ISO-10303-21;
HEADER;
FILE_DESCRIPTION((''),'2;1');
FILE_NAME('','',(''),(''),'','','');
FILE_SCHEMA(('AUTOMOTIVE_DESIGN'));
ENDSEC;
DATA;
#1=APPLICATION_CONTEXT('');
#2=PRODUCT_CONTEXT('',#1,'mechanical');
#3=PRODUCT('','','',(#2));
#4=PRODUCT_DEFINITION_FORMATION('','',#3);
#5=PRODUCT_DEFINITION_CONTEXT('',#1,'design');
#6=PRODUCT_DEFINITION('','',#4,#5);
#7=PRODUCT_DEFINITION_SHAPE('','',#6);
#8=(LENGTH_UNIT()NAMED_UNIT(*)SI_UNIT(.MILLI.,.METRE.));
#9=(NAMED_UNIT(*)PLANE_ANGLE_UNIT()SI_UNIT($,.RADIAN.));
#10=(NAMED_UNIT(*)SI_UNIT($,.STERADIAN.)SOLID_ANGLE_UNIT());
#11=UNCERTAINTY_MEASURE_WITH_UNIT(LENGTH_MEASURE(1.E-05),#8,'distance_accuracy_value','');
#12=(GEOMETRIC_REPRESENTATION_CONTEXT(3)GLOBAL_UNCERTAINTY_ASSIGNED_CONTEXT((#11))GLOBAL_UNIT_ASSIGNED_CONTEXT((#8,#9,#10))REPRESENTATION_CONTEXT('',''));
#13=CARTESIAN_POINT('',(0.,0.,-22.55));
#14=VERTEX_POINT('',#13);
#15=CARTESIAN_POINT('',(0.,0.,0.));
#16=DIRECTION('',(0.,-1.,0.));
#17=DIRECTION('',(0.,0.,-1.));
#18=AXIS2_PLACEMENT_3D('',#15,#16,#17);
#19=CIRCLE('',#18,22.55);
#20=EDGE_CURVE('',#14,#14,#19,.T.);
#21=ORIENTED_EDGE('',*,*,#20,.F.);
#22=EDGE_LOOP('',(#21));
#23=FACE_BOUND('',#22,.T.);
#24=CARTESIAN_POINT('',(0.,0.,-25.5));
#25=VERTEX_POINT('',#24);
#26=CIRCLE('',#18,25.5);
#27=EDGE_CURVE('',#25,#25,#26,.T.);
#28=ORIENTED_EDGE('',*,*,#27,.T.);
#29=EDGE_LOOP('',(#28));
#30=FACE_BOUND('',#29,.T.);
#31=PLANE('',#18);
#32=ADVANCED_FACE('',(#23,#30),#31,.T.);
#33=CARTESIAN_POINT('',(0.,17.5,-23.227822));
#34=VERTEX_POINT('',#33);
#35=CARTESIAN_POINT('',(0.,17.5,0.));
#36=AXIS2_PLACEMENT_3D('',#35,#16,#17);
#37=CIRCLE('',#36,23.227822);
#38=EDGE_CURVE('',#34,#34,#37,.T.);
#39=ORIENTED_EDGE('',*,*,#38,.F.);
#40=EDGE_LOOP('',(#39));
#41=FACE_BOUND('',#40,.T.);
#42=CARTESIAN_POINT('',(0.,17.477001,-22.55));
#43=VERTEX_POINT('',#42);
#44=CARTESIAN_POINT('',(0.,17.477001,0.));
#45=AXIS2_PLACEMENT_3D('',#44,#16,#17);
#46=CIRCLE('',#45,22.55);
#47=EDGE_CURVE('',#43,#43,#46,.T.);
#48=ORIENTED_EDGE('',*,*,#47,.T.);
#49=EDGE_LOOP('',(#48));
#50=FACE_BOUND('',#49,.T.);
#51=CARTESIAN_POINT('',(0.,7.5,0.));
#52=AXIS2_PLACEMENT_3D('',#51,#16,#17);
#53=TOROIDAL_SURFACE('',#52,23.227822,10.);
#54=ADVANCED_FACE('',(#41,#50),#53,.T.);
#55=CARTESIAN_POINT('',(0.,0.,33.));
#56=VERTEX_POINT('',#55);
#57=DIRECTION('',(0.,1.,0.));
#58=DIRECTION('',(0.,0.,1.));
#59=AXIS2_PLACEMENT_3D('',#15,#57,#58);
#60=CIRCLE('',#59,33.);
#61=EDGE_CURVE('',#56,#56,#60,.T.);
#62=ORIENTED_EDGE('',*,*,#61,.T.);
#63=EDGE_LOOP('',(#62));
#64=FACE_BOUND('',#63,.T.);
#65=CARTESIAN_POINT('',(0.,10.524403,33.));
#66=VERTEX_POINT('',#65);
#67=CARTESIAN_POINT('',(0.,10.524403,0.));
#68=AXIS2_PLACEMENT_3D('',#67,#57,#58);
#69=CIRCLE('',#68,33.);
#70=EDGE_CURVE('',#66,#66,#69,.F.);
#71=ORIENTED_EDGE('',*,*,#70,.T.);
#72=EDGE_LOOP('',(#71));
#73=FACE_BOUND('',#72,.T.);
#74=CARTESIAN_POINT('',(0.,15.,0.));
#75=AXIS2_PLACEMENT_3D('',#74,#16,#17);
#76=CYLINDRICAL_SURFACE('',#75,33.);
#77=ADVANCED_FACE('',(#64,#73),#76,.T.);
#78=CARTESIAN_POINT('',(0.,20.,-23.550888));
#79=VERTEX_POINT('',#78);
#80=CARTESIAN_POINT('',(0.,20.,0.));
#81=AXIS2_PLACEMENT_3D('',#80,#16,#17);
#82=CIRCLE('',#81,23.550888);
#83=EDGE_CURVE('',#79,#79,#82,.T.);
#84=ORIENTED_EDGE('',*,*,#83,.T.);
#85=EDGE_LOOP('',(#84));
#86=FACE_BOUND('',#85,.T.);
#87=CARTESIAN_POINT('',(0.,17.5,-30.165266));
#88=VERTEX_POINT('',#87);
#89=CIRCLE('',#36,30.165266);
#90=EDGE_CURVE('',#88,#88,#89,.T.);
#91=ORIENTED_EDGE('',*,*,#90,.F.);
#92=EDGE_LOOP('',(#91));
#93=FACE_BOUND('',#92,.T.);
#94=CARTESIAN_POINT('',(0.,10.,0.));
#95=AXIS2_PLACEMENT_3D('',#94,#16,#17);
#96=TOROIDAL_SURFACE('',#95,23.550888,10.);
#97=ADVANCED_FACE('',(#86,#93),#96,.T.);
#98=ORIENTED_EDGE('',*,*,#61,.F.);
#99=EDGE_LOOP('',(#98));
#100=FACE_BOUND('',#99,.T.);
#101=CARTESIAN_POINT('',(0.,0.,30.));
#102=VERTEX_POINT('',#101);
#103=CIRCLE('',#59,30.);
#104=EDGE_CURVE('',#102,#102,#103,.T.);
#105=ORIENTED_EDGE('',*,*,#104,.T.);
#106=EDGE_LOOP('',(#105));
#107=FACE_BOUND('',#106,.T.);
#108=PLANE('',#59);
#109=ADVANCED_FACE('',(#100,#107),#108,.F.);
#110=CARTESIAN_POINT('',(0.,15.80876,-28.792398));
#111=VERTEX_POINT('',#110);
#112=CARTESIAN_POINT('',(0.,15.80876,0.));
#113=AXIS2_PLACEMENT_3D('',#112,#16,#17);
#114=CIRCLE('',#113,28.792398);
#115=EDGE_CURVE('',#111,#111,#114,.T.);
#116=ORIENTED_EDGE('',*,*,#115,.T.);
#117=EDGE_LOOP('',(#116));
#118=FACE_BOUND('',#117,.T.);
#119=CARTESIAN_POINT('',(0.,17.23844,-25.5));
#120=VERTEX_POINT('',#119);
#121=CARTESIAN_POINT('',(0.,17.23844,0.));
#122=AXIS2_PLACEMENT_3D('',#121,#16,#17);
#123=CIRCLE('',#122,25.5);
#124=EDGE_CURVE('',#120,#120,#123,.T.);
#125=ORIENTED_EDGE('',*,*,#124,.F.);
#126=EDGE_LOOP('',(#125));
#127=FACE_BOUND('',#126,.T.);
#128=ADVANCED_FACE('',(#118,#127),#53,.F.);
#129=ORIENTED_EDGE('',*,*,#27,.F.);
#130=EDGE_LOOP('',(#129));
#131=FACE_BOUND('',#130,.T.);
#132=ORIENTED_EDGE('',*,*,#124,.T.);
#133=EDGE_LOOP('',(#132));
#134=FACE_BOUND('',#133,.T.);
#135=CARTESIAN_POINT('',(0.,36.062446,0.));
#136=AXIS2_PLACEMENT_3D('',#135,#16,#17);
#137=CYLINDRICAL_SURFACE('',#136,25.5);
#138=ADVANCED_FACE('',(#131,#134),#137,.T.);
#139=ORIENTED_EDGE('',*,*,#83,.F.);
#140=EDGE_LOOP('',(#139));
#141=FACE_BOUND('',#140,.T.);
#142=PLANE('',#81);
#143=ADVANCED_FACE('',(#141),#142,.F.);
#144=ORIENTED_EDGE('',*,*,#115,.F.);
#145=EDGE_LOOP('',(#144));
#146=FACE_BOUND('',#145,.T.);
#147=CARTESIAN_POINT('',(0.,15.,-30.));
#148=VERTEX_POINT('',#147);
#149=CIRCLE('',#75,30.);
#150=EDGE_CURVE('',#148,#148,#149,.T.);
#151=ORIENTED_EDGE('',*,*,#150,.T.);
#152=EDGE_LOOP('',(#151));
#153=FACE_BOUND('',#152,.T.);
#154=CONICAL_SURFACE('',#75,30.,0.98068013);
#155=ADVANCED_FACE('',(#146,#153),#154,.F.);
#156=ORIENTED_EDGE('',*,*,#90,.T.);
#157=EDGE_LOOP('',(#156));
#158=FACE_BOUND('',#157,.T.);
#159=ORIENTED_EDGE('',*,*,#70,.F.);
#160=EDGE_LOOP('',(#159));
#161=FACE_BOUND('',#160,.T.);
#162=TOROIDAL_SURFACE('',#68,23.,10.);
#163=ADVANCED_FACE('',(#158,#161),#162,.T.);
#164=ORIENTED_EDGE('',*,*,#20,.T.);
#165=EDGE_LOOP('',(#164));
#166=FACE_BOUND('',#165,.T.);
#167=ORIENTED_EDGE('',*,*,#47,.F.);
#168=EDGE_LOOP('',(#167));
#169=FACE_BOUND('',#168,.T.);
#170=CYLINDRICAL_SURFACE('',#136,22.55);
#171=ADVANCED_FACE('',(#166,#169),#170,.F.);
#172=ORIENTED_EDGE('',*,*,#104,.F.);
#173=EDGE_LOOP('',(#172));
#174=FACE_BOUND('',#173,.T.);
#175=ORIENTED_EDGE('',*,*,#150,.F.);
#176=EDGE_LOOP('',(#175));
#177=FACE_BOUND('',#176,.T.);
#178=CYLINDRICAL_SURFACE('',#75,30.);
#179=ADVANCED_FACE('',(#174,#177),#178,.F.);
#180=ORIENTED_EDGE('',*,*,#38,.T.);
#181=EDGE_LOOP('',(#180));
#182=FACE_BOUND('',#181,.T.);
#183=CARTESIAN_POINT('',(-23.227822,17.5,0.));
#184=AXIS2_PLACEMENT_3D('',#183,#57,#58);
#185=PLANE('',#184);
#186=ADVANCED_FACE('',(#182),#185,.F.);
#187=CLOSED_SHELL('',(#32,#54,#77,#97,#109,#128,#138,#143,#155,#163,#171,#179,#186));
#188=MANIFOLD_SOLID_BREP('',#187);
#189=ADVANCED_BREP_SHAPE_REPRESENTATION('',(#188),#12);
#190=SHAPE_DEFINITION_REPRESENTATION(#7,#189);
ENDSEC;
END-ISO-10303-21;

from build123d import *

# Parameters (mm, degrees)
SKETCH1_R                      = 33
SKETCH1_R_2                    = 30
BOSS_EXTRUDE2_DEPTH            = 15
BOSS_EXTRUDE3_REACH            = 52.774
BOSS_EXTRUDE3_END_MAJOR_RADIUS = 23.22782186
BOSS_EXTRUDE3_END_MINOR_RADIUS = 10
SKETCH4_R                      = 25.5
SKETCH4_R_2                    = 22.55
FILLET1_R                      = 10


with BuildPart() as part:
    # Sketch1 → Boss-Extrude2 (new body)
    with BuildSketch(Plane(origin=(0, 0, 0), x_dir=(1, 0, 0), z_dir=(0, 1, 0))):
        with Locations(Location((0, 0, 0), (0, 0, 270))):
            Circle(SKETCH1_R)
        with Locations(Location((0, 0, 0), (0, 0, 270))):
            Circle(SKETCH1_R_2, mode=Mode.SUBTRACT)
    extrude(amount=BOSS_EXTRUDE2_DEPTH)

    # Sketch3 → Revolve1 (revolve)
    with BuildSketch(Plane.XY, mode=Mode.PRIVATE) as revolve1_sk:
        with BuildLine():
            Line((0, 20), (-23.550888175, 20))
            ThreePointArc((-23.550888175, 20), (-27.086422081, 19.354143467), (-30.165266452, 17.5))
            Line((-30.165266452, 17.5), (-33, 15))
            Line((-33, 15), (-30, 15))
            Line((-30, 15), (-28.792397579, 15.80876026))
            ThreePointArc((-28.792397579, 15.80876026), (-26.135776243, 17.067852492), (-23.22782186, 17.5))
            Line((-23.22782186, 17.5), (0, 17.5))
            Line((0, 17.5), (0, 20))
        make_face()
    revolve(revolve1_sk.sketch.rotate(Axis((0, 15, 0), (0, 1, 0)), 270), axis=Axis((0, 15, 0), (0, 1, 0)))

    # Boss-Extrude3: up to this torus (the profile starts inside it)
    boss_extrude3_end = Plane(origin=(0, 7.5, 0), z_dir=(0, -1, 0)) * Torus(BOSS_EXTRUDE3_END_MAJOR_RADIUS, BOSS_EXTRUDE3_END_MINOR_RADIUS, mode=Mode.PRIVATE)
    # Sketch4 → Boss-Extrude3 (add, up to the surface)
    with BuildSketch(Plane.XZ, mode=Mode.PRIVATE) as boss_extrude3_sk1:
        with Locations(Location((0, 0, 0), (0, 0, 270))):
            Circle(SKETCH4_R)
        with Locations(Location((0, 0, 0), (0, 0, 270))):
            Circle(SKETCH4_R_2, mode=Mode.SUBTRACT)
    boss_extrude3_tool1 = extrude(boss_extrude3_sk1.sketch, amount=-BOSS_EXTRUDE3_REACH, mode=Mode.PRIVATE) & boss_extrude3_end
    add(boss_extrude3_tool1.solids().sort_by_distance((0, 0, 24.778751))[0])

    # Fillet1
    # the kernel refuses this fillet: 10 mm, written as the material it takes off along each edge
    with BuildSketch(Plane(origin=(0, 15, 0), x_dir=(0, 0, -1), z_dir=(1, 0, 0))) as fillet1_piece_1:
        with BuildLine():
            CenterArc((23, -4.475597226), FILLET1_R, 0, 44.231546617)
            Line((30.165266452, 2.5), (30.308571781, 2.639511945))
            ThreePointArc((30.308571781, 2.639511945), (31.714920792, 1.4), (33.132287566, 0.15))
            Line((33.132287566, 0.15), (33.2, 0))
            Line((33.2, 0), (33.2, -4.475597226))
            Line((33.2, -4.475597226), (33, -4.475597226))
        make_face()
    revolve(axis=Axis((0, 15, 0), (0, 1, 0)), revolution_arc=180, mode=Mode.SUBTRACT)
    with BuildSketch(Plane(origin=(0, 15, 0), x_dir=(0, 0, 1), z_dir=(-1, 0, 0))) as fillet1_piece_2:
        with BuildLine():
            CenterArc((23, -4.475597226), FILLET1_R, 0, 44.231546617)
            Line((30.165266452, 2.5), (30.308571781, 2.639511945))
            ThreePointArc((30.308571781, 2.639511945), (31.714920792, 1.4), (33.132287566, 0.15))
            Line((33.132287566, 0.15), (33.2, 0))
            Line((33.2, 0), (33.2, -4.475597226))
            Line((33.2, -4.475597226), (33, -4.475597226))
        make_face()
    revolve(axis=Axis((0, 15, 0), (0, 1, 0)), revolution_arc=180, mode=Mode.SUBTRACT)


solid = part.part
